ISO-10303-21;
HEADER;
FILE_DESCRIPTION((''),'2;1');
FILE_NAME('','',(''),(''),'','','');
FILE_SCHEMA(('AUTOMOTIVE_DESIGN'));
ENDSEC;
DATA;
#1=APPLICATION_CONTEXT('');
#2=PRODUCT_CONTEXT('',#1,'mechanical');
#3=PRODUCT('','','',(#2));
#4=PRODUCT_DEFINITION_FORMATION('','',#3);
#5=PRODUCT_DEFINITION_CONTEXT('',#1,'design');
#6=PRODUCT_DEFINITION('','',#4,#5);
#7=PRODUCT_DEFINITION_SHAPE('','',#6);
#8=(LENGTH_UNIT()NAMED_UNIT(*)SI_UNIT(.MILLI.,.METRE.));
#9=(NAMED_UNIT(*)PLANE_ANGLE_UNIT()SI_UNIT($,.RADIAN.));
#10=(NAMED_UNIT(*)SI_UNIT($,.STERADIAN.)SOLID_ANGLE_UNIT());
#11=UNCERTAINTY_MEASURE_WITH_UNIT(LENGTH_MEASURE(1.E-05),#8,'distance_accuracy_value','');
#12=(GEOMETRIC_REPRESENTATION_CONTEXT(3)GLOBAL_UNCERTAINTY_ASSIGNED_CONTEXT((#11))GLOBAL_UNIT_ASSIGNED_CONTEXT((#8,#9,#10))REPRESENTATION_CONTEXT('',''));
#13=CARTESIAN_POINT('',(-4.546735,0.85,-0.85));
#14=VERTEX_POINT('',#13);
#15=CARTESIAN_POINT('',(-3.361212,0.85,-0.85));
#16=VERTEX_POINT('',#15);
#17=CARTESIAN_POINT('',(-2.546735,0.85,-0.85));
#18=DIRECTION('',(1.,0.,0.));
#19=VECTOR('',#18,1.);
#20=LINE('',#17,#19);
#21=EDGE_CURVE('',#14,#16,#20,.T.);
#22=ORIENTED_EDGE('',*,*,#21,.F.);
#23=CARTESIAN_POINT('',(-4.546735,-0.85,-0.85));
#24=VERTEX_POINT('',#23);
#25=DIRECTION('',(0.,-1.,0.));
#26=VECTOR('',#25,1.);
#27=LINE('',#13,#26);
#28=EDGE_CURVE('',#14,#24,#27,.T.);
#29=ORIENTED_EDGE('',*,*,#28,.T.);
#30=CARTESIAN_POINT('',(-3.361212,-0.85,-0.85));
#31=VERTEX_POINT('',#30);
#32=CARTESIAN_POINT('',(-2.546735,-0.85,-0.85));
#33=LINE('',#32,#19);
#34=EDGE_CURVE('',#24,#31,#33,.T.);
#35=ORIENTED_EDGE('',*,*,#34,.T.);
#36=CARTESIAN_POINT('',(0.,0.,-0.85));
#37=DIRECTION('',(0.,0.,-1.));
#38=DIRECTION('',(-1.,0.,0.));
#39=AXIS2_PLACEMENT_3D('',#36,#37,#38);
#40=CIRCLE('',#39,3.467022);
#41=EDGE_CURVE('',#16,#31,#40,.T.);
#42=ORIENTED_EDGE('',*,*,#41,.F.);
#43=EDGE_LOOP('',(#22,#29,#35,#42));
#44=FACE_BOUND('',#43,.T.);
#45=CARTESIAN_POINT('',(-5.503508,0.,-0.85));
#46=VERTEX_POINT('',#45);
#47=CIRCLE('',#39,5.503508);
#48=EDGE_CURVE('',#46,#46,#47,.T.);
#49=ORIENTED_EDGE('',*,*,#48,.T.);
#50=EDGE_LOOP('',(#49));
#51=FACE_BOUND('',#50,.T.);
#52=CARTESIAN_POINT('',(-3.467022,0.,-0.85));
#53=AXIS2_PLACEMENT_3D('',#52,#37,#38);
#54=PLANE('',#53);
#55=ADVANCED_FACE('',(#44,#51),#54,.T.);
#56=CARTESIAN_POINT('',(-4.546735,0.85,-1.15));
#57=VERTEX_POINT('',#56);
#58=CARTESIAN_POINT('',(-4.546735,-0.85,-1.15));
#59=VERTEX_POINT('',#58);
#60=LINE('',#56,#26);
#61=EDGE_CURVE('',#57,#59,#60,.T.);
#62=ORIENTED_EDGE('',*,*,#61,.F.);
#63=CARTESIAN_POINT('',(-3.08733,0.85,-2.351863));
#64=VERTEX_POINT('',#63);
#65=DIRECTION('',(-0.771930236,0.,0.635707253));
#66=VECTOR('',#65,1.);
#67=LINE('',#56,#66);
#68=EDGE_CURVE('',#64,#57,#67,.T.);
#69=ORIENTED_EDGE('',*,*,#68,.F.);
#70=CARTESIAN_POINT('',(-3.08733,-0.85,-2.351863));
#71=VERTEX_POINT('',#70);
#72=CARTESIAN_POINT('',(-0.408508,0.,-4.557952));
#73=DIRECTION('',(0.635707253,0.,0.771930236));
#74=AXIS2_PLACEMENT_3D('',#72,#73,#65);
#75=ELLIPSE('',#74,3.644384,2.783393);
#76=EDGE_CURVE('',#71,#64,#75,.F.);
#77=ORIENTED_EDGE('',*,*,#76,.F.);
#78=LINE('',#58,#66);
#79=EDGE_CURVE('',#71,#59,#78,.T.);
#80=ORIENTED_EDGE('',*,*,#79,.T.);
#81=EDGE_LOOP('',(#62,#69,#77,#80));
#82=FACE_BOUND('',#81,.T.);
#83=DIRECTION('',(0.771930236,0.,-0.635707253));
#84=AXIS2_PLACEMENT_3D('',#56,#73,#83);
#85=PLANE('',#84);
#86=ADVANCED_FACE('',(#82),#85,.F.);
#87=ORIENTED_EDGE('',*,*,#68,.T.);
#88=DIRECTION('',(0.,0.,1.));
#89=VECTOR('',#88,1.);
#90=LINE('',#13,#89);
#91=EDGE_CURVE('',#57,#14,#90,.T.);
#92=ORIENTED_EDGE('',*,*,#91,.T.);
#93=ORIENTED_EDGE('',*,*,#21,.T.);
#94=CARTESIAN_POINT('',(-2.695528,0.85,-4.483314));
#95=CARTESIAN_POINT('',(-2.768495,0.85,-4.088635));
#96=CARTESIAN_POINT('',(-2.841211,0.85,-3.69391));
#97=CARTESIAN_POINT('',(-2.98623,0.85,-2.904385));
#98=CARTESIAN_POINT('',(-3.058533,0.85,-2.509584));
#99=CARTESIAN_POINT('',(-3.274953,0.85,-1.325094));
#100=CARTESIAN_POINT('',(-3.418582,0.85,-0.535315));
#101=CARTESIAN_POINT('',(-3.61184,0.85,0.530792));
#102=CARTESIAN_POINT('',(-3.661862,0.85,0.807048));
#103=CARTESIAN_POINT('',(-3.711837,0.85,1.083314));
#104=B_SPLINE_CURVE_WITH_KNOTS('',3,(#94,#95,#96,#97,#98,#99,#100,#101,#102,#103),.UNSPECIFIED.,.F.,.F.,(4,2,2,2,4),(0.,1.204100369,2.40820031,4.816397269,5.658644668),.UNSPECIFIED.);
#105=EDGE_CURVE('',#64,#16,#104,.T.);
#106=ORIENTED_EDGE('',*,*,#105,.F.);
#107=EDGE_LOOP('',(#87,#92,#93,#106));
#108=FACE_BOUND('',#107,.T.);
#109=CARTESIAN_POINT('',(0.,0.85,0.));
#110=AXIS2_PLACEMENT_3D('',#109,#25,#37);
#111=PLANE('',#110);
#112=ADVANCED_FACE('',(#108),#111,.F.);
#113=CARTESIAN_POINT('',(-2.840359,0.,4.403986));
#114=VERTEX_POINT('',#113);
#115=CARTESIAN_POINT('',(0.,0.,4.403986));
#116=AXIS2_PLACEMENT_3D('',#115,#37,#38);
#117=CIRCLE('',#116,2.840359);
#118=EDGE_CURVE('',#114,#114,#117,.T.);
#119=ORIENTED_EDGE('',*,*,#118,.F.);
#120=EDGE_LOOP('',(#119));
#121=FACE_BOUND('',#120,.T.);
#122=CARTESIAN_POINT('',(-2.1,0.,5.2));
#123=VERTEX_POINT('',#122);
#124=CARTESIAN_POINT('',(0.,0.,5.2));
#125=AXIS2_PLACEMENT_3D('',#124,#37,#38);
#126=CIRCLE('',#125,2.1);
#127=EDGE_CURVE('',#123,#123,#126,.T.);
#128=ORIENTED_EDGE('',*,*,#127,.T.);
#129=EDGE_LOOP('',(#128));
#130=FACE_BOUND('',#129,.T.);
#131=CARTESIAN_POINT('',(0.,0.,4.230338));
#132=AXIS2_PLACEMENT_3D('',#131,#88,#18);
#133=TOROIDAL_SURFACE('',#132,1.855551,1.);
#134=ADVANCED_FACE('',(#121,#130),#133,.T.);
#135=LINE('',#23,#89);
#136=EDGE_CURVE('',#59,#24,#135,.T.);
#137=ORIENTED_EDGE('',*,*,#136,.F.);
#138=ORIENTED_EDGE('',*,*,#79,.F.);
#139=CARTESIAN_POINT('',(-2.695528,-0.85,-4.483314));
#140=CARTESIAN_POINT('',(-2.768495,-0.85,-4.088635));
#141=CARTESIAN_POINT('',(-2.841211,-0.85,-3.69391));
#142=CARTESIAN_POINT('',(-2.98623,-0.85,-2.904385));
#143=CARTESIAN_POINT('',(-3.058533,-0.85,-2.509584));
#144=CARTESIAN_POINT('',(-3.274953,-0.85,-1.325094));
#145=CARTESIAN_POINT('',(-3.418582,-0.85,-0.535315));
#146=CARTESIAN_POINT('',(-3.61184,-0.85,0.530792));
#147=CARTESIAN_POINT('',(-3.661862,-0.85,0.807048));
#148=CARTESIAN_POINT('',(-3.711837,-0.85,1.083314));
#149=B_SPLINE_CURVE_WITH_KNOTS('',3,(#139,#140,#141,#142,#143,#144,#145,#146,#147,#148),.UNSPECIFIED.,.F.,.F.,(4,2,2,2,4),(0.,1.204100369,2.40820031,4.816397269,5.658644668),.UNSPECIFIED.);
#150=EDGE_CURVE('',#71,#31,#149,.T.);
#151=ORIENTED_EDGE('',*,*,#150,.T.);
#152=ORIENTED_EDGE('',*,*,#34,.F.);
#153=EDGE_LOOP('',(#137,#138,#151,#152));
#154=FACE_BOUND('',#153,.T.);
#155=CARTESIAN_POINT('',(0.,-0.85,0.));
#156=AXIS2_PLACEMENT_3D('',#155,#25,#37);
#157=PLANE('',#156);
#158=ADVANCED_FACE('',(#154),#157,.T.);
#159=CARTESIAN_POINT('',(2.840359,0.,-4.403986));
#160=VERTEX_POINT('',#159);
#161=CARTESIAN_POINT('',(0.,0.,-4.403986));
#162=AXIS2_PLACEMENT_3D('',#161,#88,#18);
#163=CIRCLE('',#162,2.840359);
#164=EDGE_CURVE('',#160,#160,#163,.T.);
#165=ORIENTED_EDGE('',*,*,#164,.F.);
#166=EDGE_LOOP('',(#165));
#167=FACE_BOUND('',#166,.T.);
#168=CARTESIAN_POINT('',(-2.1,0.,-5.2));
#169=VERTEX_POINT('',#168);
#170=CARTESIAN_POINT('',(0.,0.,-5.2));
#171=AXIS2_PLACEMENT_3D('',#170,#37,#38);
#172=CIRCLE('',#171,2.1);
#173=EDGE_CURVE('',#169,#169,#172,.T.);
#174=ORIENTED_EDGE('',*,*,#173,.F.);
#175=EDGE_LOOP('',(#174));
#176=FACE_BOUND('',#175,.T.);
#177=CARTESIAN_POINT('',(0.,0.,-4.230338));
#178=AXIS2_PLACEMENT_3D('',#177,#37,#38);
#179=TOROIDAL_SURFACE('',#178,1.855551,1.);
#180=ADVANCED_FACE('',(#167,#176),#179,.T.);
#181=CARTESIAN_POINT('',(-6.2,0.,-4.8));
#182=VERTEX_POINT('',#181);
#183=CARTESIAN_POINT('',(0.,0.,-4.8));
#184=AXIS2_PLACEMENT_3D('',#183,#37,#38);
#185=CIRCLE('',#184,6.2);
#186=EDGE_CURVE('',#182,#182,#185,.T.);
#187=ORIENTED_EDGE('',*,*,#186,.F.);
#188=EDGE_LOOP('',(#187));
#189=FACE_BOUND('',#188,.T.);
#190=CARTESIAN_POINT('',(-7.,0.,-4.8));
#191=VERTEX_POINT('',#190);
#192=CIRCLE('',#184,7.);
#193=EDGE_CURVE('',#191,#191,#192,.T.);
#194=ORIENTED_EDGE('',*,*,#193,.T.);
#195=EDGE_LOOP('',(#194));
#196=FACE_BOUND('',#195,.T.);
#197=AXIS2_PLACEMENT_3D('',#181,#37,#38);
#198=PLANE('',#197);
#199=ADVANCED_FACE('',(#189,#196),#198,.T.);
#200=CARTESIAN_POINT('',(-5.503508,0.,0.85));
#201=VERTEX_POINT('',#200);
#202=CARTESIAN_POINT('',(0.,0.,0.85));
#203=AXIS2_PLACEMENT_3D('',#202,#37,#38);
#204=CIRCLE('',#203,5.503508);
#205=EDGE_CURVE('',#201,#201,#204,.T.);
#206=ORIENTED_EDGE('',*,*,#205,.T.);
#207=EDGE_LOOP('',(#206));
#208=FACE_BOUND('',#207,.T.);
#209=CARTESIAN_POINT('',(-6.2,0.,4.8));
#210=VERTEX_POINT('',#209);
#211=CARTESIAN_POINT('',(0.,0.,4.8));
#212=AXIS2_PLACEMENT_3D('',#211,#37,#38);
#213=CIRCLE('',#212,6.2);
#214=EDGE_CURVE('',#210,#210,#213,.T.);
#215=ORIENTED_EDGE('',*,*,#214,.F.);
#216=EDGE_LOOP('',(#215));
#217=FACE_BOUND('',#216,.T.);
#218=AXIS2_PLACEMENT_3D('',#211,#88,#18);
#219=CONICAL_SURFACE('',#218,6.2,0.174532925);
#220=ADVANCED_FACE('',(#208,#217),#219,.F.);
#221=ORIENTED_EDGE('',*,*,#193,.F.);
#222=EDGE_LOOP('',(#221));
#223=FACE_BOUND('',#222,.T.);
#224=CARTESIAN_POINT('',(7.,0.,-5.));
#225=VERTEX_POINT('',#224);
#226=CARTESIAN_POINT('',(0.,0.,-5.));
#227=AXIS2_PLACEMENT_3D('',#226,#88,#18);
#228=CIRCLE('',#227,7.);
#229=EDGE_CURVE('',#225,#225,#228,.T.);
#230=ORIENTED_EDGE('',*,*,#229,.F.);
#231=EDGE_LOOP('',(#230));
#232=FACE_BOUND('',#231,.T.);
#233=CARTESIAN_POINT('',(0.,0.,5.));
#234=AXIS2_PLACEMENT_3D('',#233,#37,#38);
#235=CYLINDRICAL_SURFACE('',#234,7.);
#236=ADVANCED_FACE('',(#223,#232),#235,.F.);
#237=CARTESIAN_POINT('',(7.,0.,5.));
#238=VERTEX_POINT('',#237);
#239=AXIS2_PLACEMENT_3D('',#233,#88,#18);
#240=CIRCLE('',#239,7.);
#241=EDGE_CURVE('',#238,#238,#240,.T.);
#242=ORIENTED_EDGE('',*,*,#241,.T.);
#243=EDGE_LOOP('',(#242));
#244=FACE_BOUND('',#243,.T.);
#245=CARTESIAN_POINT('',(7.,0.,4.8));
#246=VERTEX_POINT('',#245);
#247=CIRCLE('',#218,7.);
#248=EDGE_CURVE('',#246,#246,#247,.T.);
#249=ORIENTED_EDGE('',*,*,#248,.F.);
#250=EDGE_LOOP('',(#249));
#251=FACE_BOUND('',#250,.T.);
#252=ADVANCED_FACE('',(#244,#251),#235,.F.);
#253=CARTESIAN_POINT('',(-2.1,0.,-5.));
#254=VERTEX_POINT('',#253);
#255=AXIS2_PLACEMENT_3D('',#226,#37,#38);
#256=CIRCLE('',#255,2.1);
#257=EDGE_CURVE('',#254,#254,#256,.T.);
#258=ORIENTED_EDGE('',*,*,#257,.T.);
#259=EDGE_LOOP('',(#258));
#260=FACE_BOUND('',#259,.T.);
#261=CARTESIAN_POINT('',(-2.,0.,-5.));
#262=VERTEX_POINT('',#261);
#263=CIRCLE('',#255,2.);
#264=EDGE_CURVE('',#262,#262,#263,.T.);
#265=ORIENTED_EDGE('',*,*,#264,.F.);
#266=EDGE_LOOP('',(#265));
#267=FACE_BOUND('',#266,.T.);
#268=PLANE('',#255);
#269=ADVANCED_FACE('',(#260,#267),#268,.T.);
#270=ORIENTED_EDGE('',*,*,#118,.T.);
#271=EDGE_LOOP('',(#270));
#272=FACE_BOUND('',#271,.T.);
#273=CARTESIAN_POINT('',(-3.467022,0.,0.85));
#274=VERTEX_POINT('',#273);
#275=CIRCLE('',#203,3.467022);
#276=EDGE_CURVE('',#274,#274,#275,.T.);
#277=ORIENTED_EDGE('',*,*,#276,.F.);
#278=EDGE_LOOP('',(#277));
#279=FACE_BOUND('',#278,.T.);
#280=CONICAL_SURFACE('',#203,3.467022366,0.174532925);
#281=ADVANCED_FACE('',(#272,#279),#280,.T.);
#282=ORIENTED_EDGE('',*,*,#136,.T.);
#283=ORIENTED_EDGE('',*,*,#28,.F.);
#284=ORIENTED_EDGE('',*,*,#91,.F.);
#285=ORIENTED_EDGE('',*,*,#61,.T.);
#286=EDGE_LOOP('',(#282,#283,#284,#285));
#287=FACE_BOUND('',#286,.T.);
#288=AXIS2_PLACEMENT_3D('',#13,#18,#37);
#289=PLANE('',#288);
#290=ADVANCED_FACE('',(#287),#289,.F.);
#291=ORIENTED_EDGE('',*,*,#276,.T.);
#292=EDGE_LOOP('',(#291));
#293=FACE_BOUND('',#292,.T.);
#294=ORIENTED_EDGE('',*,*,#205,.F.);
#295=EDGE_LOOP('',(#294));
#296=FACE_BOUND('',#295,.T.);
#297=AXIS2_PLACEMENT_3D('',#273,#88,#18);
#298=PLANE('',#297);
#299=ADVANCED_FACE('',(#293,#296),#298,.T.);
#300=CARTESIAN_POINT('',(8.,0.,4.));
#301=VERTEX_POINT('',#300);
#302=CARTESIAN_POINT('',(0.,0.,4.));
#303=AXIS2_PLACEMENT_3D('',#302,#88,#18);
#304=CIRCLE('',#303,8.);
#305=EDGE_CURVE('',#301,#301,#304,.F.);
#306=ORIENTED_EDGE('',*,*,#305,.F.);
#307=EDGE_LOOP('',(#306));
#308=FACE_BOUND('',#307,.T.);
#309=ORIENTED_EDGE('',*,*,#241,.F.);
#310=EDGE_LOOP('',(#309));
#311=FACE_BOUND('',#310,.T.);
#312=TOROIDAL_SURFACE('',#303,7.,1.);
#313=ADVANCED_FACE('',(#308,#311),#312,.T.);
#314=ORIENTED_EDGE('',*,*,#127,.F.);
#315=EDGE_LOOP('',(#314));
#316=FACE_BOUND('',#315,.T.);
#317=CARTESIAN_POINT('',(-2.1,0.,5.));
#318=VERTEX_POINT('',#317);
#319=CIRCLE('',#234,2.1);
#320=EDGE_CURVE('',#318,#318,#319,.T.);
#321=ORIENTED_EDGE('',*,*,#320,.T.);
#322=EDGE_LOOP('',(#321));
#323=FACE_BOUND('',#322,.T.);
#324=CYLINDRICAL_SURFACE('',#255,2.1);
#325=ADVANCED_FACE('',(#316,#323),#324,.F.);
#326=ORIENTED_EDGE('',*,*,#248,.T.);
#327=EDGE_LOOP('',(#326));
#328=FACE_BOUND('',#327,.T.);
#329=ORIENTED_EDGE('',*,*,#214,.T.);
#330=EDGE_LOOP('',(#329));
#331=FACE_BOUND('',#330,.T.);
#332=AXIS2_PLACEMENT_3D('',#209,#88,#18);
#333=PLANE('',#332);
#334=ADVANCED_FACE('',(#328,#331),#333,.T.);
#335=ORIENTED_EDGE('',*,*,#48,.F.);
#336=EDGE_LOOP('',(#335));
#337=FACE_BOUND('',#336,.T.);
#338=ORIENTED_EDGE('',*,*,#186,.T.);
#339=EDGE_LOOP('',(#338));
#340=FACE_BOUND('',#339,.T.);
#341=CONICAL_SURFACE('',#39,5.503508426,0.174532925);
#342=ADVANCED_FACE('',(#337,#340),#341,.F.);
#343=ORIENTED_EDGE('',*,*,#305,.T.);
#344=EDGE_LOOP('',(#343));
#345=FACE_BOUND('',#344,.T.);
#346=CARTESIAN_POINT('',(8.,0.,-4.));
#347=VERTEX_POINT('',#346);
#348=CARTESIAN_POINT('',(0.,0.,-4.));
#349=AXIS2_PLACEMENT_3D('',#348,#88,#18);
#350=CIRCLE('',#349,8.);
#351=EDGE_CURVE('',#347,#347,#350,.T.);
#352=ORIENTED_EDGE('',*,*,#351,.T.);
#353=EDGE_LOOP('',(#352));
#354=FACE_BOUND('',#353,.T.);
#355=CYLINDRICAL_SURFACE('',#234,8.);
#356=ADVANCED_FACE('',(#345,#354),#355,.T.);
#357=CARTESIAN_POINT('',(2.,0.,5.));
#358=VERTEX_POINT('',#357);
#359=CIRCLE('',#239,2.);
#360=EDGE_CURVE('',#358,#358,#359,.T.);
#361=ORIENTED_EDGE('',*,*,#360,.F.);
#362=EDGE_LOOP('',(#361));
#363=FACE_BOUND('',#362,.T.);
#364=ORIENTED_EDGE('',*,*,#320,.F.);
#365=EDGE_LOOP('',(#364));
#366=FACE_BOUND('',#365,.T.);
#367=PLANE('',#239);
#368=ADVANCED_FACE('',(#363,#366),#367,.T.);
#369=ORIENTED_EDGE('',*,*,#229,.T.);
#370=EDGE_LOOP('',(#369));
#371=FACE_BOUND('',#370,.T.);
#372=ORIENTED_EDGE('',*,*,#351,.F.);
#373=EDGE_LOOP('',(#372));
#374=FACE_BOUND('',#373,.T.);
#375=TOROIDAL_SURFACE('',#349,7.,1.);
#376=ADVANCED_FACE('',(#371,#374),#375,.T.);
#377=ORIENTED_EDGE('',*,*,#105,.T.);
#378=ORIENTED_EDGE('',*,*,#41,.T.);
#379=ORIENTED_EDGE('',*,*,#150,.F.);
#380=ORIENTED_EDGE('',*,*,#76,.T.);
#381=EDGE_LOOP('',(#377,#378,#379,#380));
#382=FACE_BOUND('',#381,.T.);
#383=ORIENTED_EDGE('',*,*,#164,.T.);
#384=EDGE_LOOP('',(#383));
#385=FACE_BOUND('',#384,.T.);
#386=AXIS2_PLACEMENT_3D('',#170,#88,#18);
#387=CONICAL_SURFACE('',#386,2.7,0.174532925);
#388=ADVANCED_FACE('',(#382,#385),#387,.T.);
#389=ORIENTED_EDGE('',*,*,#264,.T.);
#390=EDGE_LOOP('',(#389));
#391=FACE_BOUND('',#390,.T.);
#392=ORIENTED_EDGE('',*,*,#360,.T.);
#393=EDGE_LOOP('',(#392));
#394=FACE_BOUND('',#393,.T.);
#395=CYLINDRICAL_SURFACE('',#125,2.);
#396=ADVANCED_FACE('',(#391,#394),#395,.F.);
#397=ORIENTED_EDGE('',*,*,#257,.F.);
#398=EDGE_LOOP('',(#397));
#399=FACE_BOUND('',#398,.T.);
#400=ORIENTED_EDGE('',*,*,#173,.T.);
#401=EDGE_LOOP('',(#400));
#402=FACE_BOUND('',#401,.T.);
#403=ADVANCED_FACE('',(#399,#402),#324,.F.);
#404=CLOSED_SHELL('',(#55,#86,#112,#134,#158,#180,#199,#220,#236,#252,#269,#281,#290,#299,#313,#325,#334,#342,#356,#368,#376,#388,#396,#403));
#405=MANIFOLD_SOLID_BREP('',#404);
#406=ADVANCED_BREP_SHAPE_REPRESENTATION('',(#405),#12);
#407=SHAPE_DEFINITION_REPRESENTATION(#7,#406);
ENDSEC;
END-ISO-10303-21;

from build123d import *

# Parameters (mm, degrees)
SKETCH1_R           = 7.999999999999998
SKETCH1_R_2         = 7
BOSS_EXTRUDE1_DEPTH = 5
FILLET1_R           = 1
BOSS_EXTRUDE2_DEPTH = 0.85
SKETCH4_R           = 2
CUT_EXTRUDE1_DEPTH  = 16.23285921946369
FILLET3_R           = 1
FILLET4_R           = 1


# Some blends are built 0.0001 mm under size
with BuildPart() as part:
    # Sketch1 → Boss-Extrude1 (new, symmetric)
    with BuildSketch(Plane.XY):
        Circle(SKETCH1_R)
        Circle(SKETCH1_R_2, mode=Mode.SUBTRACT)
    extrude(amount=BOSS_EXTRUDE1_DEPTH, both=True)

    # Fillet1
    fillet1_edges = [part.edges().sort_by_distance(p)[0] for p in [
        (-7.999999999999998, 9.8e-16, -5),
        (-7.999999999999998, 9.8e-16, 5),
    ]]
    fillet(fillet1_edges, radius=FILLET1_R - 0.0001)  # a hair under: the kernel refuses the full size

    # Sketch2 → Revolve1 (revolve)
    with BuildSketch(Plane(origin=(0, 0, 0), x_dir=(1, 0, 0), z_dir=(0, 1, 0))):
        Polygon((4e-17, 5), (1.26e-15, -5), (-2.099999999999999, -4.999999999999999), (-2.0999999999999996, -5.200000000000002), (-2.6999999999999993, -5.200000000000002), (-3.4670223660818085, -0.8500000000000001), (-5.503508426201579, -0.8500000000000006), (-6.199999999999999, -4.800000000000001), (-6.999999999999999, -4.800000000000001), (-7, 4.799999999999999), (-6.2, 4.799999999999999), (-5.503508426201579, 0.8499999999999993), (-3.4670223660818085, 0.8499999999999992), (-2.7000000000000006, 5.200000000000002), (-2.1000000000000005, 5.200000000000002), (-2.1, 4.999999999999999), align=None)
    revolve(axis=Axis((4e-17, 0, -5), (1.2e-16, 0, 1)))

    # Sketch3 → Boss-Extrude2 (add, symmetric)
    with BuildSketch(Plane(origin=(0, 0, 0), x_dir=(1, 0, 0), z_dir=(0, 1, 0))):
        Polygon((-2.546735183281943, 2.550000000000001), (-2.546735183281943, 0.8500000000000001), (-4.546735183281943, 0.850000000000001), (-4.546735183281943, 1.15), (-2.846735183281943, 2.5500000000000003), align=None)
    extrude(amount=BOSS_EXTRUDE2_DEPTH, both=True)

    # Sketch4 → Cut-Extrude1 (cut, through all)
    with BuildSketch(Plane(origin=(-6.1e-16, 0, -4.999999999999999), x_dir=(-1, 0, 0), z_dir=(0, 0, -1))):
        Circle(SKETCH4_R)
    extrude(amount=-CUT_EXTRUDE1_DEPTH, mode=Mode.SUBTRACT)

    # Fillet3
    # the kernel refuses this fillet: 1 mm, written as the material it takes off along each edge
    with BuildSketch(Plane(origin=(1.29e-15, 0, 5.200000000000003), x_dir=(-1, 0, 0), z_dir=(0, 1, 0))) as fillet3_piece_1:
        with BuildLine():
            CenterArc((1.8555509868612252, -0.9696621473355957), FILLET3_R, 9.99999999999983, 65.85072553441276)
            Line((2.100000000000001, 0), (2.1048889802627766, 0.01939324294671163))
            ThreePointArc((2.1048889802627766, 0.01939324294671163), (2.4000000000000004, 0.01999999999999957), (2.7000000000000006, 0.01999999999999957))
            Line((2.7000000000000006, 0.01999999999999957), (2.719696155060245, 0.00347296355333881))
            Line((2.719696155060245, 0.00347296355333881), (2.860054894933678, -0.7925410061153295))
            Line((2.860054894933678, -0.7925410061153295), (2.840358739873434, -0.7960139696686683))
        make_face()
    revolve(axis=Axis((1.29e-15, 0, 5.200000000000003), (1.2e-16, 0, 1)), mode=Mode.SUBTRACT)

    # Fillet4
    # the kernel refuses this fillet: 1 mm, written as the material it takes off along each edge
    with BuildSketch(Plane(origin=(1e-17, 0, -5.200000000000002), x_dir=(-1, 0, 0), z_dir=(0, 1, 0))) as fillet4_piece_1:
        with BuildLine():
            CenterArc((1.8555509868612252, 0.9696621473355957), FILLET4_R, 284.1492744655874, 65.85072553441279)
            Line((2.1000000000000005, 0), (2.104888980262776, -0.01939324294671163))
            ThreePointArc((2.104888980262776, -0.01939324294671163), (2.4000000000000004, -0.01999999999999957), (2.7000000000000006, -0.01999999999999957))
            Line((2.7000000000000006, -0.01999999999999957), (2.719696155060245, -0.00347296355333881))
            Line((2.719696155060245, -0.00347296355333881), (2.860054894933678, 0.7925410061153295))
            Line((2.860054894933678, 0.7925410061153295), (2.840358739873434, 0.7960139696686683))
        make_face()
    revolve(axis=Axis((1e-17, 0, -5.200000000000002), (1.2e-16, 0, 1)), mode=Mode.SUBTRACT)


solid = part.part
